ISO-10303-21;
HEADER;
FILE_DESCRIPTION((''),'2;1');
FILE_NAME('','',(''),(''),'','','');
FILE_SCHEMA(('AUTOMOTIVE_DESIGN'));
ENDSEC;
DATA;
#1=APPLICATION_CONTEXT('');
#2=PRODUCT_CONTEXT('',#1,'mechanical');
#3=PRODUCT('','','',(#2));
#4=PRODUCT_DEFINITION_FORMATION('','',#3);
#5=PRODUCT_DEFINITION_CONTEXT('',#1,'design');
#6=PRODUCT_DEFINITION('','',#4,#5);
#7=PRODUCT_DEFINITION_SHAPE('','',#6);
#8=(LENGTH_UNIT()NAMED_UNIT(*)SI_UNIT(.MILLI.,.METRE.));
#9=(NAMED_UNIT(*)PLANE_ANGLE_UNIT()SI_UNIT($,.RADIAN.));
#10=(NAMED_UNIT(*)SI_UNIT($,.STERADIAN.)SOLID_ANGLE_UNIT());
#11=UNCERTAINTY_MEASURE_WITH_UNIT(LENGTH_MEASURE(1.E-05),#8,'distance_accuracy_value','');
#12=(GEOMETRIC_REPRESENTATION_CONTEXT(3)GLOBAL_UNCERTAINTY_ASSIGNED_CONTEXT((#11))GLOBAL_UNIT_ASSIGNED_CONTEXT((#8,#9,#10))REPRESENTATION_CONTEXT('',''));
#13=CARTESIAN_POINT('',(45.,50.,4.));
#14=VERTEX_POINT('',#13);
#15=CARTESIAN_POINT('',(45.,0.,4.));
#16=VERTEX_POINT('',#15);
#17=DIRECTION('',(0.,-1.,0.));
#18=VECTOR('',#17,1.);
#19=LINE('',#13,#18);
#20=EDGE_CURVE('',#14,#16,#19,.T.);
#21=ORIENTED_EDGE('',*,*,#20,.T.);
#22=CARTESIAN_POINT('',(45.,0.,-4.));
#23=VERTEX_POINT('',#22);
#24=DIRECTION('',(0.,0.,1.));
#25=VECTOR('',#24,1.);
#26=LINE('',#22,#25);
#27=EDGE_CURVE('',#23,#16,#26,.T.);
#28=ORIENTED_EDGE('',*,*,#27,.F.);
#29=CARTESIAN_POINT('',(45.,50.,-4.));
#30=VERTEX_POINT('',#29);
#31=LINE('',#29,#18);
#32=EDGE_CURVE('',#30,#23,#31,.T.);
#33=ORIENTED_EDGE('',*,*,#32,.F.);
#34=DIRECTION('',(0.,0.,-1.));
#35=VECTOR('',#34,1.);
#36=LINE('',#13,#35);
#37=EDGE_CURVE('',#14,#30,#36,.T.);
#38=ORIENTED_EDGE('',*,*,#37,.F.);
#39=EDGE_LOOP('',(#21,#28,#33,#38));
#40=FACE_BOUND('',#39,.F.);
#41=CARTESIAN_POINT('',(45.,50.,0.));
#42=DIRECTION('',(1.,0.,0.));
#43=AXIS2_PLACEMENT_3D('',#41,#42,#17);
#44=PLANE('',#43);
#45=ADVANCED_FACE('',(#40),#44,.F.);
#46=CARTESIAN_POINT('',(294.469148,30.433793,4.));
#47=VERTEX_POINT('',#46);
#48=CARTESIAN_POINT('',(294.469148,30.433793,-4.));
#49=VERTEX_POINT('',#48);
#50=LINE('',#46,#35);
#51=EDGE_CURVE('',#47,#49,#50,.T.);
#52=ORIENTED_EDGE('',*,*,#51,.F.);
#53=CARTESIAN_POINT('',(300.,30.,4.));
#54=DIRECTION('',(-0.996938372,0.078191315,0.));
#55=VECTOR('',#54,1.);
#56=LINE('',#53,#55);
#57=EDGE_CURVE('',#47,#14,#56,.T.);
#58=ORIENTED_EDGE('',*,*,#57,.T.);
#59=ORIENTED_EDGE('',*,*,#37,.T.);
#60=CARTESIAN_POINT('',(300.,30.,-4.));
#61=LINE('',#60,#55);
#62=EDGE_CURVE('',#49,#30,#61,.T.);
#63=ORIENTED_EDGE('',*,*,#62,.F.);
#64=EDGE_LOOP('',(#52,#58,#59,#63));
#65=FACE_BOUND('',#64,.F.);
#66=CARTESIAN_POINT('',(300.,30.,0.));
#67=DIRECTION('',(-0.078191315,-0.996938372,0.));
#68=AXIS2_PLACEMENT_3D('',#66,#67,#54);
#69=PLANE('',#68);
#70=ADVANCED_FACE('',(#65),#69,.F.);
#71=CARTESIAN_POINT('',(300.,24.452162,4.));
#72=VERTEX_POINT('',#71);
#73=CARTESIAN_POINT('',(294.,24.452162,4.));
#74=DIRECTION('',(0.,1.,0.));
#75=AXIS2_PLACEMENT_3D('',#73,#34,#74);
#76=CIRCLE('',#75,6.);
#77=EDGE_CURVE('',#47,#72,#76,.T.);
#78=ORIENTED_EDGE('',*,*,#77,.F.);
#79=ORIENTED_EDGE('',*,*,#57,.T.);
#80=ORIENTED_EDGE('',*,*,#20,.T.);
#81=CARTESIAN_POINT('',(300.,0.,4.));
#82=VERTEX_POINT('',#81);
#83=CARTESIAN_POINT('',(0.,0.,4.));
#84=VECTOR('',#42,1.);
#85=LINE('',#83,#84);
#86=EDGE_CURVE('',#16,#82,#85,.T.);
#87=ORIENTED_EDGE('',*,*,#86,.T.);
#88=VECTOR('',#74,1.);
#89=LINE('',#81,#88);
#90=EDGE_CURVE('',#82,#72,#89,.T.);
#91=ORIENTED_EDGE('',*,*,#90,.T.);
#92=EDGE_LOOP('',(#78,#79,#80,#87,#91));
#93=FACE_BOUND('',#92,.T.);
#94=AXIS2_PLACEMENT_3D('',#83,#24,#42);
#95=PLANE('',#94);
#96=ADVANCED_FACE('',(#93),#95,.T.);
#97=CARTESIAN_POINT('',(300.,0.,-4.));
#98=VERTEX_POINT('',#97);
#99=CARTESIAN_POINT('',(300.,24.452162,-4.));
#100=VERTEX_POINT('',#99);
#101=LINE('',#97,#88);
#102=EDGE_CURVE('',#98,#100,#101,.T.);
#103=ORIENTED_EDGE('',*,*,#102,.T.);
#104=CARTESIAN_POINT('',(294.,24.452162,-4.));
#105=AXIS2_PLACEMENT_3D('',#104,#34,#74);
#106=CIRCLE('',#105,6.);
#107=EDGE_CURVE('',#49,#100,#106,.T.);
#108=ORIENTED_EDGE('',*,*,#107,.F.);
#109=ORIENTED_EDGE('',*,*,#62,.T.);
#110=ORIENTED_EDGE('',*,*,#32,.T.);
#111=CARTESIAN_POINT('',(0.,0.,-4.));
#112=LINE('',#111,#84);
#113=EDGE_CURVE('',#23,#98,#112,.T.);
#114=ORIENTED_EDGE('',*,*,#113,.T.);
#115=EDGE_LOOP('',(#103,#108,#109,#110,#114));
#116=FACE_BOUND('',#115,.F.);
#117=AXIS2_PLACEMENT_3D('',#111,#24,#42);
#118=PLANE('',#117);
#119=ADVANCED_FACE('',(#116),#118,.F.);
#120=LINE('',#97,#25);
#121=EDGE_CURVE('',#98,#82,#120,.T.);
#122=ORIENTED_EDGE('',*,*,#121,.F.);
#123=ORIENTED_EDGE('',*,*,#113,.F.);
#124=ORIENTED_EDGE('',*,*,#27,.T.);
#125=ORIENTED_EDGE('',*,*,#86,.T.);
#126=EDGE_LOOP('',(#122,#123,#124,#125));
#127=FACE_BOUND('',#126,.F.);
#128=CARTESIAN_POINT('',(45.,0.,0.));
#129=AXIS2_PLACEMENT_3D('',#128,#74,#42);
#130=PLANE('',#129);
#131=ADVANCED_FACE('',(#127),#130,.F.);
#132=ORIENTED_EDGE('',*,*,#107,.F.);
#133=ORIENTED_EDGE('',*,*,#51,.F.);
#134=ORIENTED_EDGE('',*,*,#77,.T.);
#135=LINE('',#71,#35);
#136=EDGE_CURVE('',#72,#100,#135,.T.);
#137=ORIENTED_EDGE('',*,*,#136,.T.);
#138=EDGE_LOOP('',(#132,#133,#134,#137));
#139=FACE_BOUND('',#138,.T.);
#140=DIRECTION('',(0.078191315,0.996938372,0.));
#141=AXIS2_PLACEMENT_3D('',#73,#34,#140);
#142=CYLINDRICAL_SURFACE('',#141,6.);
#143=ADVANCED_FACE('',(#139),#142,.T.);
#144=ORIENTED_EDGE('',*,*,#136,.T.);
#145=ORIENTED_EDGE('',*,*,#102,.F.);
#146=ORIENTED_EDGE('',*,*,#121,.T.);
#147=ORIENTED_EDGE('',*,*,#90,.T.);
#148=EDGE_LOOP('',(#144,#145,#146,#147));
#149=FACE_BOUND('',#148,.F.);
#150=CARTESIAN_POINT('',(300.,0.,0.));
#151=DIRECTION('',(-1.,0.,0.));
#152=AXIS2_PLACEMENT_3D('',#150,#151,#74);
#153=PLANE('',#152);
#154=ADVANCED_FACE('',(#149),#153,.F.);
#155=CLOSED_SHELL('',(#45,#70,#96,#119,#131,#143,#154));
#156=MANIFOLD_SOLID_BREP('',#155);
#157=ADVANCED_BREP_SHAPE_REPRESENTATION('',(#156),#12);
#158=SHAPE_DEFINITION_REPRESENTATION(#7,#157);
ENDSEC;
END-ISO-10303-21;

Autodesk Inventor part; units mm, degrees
ref_plane "YZ Plane" through (0, 0, 0) normal (1, 0, 0) x (0, 1, 0)
ref_plane "XZ Plane" through (0, 0, 0) normal (0, 1, 0) x (-1, 0, 0)
ref_plane "XY Plane" through (0, 0, 0) normal (0, 0, 1) x (1, 0, 0)
sketch "Sketch3" plane through (0, 0, 0) normal (0, 0, 1) x (1, 0, 0)
  line L0 (0, 0) -> (300, 0)
  line L1 (300, 0) -> (300, 30)
  line L2 (300, 30) -> (-5.542, 53.9641)
  line L3 (45, 50) -> (45, 0)
  dimension "d11" = 300
  dimension "d12" = 30
  dimension "d13" = 45
  dimension "d14" = 50
extrude "Plate1" add sketch "Sketch3" along normal mid plane 8
fillet "Corner Round1" radius 6 1 edges at (300, 30, 0)
equation "\"d15\" = Thickness"
equation "\"BendRadius\" = Thickness"
equation "\"BendReliefWidth\" = Thickness"
equation "\"BendReliefDepth\" = 0.5 * Thickness"
equation "\"CornerReliefSize\" = 4 * Thickness"
equation "\"MinimumRemnant\" = 2 * Thickness"
equation "\"TransitionRadius\" = BendRadius"
equation "\"JacobiRadiusSize\" = BendRadius"
equation "\"GapSize\" = Thickness"
equation "\"Thickness\" = 8"
properties part number "PNS 1614 charging hatch reinf 500mm" material "Steel"
